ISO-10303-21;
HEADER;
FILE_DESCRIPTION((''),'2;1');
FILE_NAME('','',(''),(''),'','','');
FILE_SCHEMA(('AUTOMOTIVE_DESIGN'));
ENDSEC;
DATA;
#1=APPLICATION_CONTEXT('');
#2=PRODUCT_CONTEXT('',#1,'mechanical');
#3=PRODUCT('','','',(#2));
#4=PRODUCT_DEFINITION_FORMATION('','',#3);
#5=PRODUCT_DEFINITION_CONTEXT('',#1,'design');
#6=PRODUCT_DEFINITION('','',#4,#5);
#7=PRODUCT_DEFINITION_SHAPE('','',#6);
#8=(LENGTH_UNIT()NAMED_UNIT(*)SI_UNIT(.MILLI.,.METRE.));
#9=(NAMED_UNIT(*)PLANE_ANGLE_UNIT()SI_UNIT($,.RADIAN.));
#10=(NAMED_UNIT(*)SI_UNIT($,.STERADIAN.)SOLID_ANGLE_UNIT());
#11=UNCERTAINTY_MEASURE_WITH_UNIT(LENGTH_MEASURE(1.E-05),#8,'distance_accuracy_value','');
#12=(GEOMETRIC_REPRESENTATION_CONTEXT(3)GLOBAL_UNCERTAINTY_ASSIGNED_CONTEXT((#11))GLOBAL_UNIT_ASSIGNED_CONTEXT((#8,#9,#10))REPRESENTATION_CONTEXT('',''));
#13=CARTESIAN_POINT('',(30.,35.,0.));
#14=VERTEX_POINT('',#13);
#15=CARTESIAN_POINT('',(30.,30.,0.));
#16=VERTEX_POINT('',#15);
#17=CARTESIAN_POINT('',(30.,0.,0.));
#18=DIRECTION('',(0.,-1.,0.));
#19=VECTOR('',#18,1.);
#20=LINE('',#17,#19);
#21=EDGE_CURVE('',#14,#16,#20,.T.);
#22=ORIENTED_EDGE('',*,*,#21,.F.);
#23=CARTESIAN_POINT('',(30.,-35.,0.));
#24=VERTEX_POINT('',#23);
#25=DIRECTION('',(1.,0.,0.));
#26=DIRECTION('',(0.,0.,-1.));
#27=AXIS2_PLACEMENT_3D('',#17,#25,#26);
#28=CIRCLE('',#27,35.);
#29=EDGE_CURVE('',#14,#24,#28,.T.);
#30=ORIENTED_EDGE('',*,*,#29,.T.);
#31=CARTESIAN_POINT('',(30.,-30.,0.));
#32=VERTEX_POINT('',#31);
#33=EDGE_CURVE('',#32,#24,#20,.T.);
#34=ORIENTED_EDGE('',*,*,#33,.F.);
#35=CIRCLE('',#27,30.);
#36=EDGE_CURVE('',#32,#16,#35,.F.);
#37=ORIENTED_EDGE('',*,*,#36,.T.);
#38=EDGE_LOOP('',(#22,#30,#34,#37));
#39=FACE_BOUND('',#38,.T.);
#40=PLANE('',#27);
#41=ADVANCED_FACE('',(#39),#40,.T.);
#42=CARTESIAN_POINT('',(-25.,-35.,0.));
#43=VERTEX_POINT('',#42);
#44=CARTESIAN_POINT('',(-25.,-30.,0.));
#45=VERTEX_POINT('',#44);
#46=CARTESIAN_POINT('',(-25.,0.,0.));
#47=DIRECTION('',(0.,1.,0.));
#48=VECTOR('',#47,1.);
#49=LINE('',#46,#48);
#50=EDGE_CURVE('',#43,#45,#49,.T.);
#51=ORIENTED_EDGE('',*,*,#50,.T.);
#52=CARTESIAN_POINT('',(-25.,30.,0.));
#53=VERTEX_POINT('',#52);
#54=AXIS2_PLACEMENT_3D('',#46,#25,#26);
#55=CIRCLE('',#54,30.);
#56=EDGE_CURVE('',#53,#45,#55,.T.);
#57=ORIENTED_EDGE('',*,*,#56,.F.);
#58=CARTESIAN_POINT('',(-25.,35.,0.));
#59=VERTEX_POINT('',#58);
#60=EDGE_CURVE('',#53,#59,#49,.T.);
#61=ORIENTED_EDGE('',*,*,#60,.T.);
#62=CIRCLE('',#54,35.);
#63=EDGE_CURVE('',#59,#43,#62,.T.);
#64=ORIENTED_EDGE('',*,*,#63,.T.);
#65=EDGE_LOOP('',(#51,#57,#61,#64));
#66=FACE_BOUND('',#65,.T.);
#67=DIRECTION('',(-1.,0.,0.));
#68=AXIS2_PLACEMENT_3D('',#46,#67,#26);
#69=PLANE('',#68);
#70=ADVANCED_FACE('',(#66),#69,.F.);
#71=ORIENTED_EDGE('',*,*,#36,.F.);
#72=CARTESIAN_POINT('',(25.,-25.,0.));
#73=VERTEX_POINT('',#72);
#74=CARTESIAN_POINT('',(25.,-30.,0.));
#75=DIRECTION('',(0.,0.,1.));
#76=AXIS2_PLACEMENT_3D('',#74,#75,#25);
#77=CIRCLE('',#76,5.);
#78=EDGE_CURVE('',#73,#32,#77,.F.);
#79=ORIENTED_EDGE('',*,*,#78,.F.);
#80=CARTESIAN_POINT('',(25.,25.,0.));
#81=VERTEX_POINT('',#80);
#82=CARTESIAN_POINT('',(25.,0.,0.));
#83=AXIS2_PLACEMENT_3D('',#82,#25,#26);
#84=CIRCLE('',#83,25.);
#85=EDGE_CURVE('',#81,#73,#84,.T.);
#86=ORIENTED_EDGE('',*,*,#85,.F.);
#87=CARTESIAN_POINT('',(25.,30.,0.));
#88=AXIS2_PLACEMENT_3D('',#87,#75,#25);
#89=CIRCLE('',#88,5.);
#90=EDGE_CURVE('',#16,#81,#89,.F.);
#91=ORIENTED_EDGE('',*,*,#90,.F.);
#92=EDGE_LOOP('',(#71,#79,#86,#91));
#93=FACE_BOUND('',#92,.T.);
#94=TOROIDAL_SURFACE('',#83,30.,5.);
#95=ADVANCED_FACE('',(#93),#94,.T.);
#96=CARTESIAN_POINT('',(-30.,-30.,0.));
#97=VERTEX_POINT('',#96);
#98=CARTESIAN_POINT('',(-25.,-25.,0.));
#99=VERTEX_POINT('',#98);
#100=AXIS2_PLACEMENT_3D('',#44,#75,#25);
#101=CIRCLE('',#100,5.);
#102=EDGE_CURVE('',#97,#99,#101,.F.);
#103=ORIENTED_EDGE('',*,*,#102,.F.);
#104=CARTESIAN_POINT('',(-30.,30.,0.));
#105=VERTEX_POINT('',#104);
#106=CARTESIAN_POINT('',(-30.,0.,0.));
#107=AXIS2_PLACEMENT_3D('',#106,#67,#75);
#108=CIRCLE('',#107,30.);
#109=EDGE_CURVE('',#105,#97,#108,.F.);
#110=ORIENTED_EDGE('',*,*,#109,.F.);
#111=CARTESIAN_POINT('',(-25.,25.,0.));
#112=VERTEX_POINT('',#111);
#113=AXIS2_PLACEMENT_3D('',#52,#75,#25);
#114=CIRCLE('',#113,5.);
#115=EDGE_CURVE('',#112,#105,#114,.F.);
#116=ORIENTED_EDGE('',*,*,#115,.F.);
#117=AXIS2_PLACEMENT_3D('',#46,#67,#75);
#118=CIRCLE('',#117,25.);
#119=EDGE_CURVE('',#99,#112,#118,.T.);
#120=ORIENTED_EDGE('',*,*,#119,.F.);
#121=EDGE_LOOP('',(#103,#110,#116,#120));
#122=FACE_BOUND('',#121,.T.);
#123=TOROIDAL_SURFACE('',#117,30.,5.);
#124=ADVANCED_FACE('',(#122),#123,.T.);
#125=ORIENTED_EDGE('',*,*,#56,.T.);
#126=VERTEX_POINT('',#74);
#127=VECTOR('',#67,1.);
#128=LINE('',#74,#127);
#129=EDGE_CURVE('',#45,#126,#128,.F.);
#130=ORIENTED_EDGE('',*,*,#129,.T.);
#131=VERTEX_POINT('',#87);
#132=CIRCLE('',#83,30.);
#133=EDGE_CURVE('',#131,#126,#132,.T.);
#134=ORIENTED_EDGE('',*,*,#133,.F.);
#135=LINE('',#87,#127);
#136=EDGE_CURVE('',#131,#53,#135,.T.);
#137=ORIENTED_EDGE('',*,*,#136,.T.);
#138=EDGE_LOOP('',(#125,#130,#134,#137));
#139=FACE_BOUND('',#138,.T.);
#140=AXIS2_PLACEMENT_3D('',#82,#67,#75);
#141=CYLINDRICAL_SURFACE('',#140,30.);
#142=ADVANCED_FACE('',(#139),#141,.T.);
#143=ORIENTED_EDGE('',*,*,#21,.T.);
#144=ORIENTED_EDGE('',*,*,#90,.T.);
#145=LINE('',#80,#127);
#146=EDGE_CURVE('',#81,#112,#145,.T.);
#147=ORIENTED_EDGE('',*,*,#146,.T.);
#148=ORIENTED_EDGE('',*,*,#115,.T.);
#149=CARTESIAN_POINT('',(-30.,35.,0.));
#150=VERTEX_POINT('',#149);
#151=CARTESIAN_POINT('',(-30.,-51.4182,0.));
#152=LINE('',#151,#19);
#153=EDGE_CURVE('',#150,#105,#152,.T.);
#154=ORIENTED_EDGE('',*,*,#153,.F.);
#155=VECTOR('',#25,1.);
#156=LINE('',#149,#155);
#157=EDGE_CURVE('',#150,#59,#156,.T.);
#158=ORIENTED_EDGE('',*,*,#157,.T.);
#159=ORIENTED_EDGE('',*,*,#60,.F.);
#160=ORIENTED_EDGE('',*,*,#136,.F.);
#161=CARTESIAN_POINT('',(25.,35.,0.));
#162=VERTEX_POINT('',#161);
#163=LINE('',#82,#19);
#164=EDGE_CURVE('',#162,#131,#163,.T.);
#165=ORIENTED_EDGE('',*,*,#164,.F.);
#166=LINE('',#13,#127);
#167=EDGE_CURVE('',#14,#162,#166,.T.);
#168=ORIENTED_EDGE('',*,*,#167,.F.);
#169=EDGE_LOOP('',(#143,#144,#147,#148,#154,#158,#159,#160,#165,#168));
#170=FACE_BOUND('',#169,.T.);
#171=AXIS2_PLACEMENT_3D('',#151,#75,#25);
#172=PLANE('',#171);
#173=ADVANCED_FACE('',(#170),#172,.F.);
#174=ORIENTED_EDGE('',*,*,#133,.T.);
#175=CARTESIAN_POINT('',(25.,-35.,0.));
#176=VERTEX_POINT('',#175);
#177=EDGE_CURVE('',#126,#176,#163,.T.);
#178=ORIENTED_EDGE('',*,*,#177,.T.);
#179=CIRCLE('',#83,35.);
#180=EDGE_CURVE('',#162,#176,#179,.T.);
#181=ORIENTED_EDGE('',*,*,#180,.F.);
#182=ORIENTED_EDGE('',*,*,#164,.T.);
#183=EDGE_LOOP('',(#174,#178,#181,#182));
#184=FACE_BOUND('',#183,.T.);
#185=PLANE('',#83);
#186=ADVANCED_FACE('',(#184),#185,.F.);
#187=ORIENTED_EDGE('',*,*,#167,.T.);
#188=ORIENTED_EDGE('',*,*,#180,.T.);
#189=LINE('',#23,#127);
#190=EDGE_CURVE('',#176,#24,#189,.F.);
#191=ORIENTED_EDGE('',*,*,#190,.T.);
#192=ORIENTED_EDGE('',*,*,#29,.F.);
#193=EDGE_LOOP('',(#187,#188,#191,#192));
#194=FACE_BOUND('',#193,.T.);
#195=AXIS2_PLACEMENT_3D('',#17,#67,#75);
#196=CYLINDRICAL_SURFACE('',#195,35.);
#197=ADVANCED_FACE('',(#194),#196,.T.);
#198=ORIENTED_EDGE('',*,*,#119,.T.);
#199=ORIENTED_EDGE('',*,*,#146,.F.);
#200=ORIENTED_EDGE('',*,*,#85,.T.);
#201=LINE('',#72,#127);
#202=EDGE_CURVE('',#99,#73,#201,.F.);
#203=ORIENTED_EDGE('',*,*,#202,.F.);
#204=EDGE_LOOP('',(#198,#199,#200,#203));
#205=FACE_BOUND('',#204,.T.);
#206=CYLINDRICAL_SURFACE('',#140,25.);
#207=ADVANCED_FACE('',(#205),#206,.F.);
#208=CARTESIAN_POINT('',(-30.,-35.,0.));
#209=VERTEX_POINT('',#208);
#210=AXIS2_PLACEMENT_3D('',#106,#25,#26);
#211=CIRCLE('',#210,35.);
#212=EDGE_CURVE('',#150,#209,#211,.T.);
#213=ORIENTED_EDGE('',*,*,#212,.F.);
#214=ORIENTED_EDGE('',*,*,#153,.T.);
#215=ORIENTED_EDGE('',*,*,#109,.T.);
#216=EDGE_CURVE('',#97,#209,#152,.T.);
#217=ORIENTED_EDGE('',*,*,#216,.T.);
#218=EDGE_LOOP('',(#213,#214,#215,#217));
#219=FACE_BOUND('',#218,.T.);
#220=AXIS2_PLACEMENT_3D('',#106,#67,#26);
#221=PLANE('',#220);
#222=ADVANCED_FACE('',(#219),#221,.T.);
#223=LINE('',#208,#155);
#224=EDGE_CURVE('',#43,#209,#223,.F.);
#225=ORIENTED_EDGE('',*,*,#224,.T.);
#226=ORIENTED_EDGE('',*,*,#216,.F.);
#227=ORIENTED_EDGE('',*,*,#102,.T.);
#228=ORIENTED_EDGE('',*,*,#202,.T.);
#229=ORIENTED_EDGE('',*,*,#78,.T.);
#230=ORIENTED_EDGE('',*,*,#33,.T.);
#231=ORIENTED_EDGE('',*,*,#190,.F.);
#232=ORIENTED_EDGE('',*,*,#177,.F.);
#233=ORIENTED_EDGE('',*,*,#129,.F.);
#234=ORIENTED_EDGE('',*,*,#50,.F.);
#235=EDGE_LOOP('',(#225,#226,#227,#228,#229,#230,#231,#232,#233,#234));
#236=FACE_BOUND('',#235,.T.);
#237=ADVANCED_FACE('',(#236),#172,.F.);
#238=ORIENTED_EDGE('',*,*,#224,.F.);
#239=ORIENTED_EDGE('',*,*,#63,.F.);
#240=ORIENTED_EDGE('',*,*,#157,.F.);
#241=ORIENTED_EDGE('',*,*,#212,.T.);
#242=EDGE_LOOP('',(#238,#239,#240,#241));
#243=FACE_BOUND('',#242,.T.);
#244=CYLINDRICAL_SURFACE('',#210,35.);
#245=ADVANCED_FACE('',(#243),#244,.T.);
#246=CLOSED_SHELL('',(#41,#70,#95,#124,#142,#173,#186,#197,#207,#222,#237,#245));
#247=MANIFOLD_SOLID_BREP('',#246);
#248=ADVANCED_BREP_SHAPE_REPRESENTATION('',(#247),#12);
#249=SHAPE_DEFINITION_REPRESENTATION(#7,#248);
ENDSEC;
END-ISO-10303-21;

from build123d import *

# Parameters (mm, degrees)
SKETCH1_R               = 30
SKETCH1_R_2             = 25
BOSS_EXTRUDE1_DEPTH     = 25
SKETCH2_R               = 35
SKETCH2_R_2             = 25
BOSS_EXTRUDE2_DEPTH     = 5
FILLET1_R               = 5
CUT_EXTRUDE1_DEPTH      = 78.781745931
CUT_EXTRUDE1_DEPTH_BACK = 78.781745931
SKETCH3_W               = 61.025724242
SKETCH3_H               = 108.223839892


with BuildPart() as part:
    # Sketch1 → Boss-Extrude1 (new, symmetric)
    with BuildSketch(Plane(origin=(0, 0, 0), x_dir=(0, 0, -1), z_dir=(1, 0, 0))):
        Circle(SKETCH1_R)
        Circle(SKETCH1_R_2, mode=Mode.SUBTRACT)
    extrude(amount=BOSS_EXTRUDE1_DEPTH, both=True)

    # Sketch2 → Boss-Extrude2 (add)
    with BuildSketch(Plane(origin=(25, 0, 0), x_dir=(0, 0, -1), z_dir=(1, 0, 0))):
        Circle(SKETCH2_R)
        Circle(SKETCH2_R_2, mode=Mode.SUBTRACT)
    boss_extrude2 = extrude(amount=BOSS_EXTRUDE2_DEPTH)

    # Mirror3: Boss-Extrude2 across plane
    add(boss_extrude2.mirror(Plane(origin=(0, 0, 0), x_dir=(0, 0, 1), z_dir=(1, 0, 0))))

    # Fillet1
    fillet1_edges = [part.edges().sort_by_distance(p)[0] for p in [
        (30, 0, 25),
        (-30, 0, 25),
    ]]
    fillet(fillet1_edges, radius=FILLET1_R - 0.0001)  # a hair under: the kernel refuses the full size

    # Sketch3 → Cut-Extrude1 (cut, two sides: drawn at the far end of the back side and taken through both)
    with BuildSketch(Plane(origin=(30, 0, 0), x_dir=(0, 0, -1), z_dir=(1, 0, 0)).offset(-CUT_EXTRUDE1_DEPTH_BACK)):
        with Locations((30.512862121, 2.693719616)):
            Rectangle(SKETCH3_W, SKETCH3_H)
    extrude(amount=CUT_EXTRUDE1_DEPTH + CUT_EXTRUDE1_DEPTH_BACK, mode=Mode.SUBTRACT)


solid = part.part
